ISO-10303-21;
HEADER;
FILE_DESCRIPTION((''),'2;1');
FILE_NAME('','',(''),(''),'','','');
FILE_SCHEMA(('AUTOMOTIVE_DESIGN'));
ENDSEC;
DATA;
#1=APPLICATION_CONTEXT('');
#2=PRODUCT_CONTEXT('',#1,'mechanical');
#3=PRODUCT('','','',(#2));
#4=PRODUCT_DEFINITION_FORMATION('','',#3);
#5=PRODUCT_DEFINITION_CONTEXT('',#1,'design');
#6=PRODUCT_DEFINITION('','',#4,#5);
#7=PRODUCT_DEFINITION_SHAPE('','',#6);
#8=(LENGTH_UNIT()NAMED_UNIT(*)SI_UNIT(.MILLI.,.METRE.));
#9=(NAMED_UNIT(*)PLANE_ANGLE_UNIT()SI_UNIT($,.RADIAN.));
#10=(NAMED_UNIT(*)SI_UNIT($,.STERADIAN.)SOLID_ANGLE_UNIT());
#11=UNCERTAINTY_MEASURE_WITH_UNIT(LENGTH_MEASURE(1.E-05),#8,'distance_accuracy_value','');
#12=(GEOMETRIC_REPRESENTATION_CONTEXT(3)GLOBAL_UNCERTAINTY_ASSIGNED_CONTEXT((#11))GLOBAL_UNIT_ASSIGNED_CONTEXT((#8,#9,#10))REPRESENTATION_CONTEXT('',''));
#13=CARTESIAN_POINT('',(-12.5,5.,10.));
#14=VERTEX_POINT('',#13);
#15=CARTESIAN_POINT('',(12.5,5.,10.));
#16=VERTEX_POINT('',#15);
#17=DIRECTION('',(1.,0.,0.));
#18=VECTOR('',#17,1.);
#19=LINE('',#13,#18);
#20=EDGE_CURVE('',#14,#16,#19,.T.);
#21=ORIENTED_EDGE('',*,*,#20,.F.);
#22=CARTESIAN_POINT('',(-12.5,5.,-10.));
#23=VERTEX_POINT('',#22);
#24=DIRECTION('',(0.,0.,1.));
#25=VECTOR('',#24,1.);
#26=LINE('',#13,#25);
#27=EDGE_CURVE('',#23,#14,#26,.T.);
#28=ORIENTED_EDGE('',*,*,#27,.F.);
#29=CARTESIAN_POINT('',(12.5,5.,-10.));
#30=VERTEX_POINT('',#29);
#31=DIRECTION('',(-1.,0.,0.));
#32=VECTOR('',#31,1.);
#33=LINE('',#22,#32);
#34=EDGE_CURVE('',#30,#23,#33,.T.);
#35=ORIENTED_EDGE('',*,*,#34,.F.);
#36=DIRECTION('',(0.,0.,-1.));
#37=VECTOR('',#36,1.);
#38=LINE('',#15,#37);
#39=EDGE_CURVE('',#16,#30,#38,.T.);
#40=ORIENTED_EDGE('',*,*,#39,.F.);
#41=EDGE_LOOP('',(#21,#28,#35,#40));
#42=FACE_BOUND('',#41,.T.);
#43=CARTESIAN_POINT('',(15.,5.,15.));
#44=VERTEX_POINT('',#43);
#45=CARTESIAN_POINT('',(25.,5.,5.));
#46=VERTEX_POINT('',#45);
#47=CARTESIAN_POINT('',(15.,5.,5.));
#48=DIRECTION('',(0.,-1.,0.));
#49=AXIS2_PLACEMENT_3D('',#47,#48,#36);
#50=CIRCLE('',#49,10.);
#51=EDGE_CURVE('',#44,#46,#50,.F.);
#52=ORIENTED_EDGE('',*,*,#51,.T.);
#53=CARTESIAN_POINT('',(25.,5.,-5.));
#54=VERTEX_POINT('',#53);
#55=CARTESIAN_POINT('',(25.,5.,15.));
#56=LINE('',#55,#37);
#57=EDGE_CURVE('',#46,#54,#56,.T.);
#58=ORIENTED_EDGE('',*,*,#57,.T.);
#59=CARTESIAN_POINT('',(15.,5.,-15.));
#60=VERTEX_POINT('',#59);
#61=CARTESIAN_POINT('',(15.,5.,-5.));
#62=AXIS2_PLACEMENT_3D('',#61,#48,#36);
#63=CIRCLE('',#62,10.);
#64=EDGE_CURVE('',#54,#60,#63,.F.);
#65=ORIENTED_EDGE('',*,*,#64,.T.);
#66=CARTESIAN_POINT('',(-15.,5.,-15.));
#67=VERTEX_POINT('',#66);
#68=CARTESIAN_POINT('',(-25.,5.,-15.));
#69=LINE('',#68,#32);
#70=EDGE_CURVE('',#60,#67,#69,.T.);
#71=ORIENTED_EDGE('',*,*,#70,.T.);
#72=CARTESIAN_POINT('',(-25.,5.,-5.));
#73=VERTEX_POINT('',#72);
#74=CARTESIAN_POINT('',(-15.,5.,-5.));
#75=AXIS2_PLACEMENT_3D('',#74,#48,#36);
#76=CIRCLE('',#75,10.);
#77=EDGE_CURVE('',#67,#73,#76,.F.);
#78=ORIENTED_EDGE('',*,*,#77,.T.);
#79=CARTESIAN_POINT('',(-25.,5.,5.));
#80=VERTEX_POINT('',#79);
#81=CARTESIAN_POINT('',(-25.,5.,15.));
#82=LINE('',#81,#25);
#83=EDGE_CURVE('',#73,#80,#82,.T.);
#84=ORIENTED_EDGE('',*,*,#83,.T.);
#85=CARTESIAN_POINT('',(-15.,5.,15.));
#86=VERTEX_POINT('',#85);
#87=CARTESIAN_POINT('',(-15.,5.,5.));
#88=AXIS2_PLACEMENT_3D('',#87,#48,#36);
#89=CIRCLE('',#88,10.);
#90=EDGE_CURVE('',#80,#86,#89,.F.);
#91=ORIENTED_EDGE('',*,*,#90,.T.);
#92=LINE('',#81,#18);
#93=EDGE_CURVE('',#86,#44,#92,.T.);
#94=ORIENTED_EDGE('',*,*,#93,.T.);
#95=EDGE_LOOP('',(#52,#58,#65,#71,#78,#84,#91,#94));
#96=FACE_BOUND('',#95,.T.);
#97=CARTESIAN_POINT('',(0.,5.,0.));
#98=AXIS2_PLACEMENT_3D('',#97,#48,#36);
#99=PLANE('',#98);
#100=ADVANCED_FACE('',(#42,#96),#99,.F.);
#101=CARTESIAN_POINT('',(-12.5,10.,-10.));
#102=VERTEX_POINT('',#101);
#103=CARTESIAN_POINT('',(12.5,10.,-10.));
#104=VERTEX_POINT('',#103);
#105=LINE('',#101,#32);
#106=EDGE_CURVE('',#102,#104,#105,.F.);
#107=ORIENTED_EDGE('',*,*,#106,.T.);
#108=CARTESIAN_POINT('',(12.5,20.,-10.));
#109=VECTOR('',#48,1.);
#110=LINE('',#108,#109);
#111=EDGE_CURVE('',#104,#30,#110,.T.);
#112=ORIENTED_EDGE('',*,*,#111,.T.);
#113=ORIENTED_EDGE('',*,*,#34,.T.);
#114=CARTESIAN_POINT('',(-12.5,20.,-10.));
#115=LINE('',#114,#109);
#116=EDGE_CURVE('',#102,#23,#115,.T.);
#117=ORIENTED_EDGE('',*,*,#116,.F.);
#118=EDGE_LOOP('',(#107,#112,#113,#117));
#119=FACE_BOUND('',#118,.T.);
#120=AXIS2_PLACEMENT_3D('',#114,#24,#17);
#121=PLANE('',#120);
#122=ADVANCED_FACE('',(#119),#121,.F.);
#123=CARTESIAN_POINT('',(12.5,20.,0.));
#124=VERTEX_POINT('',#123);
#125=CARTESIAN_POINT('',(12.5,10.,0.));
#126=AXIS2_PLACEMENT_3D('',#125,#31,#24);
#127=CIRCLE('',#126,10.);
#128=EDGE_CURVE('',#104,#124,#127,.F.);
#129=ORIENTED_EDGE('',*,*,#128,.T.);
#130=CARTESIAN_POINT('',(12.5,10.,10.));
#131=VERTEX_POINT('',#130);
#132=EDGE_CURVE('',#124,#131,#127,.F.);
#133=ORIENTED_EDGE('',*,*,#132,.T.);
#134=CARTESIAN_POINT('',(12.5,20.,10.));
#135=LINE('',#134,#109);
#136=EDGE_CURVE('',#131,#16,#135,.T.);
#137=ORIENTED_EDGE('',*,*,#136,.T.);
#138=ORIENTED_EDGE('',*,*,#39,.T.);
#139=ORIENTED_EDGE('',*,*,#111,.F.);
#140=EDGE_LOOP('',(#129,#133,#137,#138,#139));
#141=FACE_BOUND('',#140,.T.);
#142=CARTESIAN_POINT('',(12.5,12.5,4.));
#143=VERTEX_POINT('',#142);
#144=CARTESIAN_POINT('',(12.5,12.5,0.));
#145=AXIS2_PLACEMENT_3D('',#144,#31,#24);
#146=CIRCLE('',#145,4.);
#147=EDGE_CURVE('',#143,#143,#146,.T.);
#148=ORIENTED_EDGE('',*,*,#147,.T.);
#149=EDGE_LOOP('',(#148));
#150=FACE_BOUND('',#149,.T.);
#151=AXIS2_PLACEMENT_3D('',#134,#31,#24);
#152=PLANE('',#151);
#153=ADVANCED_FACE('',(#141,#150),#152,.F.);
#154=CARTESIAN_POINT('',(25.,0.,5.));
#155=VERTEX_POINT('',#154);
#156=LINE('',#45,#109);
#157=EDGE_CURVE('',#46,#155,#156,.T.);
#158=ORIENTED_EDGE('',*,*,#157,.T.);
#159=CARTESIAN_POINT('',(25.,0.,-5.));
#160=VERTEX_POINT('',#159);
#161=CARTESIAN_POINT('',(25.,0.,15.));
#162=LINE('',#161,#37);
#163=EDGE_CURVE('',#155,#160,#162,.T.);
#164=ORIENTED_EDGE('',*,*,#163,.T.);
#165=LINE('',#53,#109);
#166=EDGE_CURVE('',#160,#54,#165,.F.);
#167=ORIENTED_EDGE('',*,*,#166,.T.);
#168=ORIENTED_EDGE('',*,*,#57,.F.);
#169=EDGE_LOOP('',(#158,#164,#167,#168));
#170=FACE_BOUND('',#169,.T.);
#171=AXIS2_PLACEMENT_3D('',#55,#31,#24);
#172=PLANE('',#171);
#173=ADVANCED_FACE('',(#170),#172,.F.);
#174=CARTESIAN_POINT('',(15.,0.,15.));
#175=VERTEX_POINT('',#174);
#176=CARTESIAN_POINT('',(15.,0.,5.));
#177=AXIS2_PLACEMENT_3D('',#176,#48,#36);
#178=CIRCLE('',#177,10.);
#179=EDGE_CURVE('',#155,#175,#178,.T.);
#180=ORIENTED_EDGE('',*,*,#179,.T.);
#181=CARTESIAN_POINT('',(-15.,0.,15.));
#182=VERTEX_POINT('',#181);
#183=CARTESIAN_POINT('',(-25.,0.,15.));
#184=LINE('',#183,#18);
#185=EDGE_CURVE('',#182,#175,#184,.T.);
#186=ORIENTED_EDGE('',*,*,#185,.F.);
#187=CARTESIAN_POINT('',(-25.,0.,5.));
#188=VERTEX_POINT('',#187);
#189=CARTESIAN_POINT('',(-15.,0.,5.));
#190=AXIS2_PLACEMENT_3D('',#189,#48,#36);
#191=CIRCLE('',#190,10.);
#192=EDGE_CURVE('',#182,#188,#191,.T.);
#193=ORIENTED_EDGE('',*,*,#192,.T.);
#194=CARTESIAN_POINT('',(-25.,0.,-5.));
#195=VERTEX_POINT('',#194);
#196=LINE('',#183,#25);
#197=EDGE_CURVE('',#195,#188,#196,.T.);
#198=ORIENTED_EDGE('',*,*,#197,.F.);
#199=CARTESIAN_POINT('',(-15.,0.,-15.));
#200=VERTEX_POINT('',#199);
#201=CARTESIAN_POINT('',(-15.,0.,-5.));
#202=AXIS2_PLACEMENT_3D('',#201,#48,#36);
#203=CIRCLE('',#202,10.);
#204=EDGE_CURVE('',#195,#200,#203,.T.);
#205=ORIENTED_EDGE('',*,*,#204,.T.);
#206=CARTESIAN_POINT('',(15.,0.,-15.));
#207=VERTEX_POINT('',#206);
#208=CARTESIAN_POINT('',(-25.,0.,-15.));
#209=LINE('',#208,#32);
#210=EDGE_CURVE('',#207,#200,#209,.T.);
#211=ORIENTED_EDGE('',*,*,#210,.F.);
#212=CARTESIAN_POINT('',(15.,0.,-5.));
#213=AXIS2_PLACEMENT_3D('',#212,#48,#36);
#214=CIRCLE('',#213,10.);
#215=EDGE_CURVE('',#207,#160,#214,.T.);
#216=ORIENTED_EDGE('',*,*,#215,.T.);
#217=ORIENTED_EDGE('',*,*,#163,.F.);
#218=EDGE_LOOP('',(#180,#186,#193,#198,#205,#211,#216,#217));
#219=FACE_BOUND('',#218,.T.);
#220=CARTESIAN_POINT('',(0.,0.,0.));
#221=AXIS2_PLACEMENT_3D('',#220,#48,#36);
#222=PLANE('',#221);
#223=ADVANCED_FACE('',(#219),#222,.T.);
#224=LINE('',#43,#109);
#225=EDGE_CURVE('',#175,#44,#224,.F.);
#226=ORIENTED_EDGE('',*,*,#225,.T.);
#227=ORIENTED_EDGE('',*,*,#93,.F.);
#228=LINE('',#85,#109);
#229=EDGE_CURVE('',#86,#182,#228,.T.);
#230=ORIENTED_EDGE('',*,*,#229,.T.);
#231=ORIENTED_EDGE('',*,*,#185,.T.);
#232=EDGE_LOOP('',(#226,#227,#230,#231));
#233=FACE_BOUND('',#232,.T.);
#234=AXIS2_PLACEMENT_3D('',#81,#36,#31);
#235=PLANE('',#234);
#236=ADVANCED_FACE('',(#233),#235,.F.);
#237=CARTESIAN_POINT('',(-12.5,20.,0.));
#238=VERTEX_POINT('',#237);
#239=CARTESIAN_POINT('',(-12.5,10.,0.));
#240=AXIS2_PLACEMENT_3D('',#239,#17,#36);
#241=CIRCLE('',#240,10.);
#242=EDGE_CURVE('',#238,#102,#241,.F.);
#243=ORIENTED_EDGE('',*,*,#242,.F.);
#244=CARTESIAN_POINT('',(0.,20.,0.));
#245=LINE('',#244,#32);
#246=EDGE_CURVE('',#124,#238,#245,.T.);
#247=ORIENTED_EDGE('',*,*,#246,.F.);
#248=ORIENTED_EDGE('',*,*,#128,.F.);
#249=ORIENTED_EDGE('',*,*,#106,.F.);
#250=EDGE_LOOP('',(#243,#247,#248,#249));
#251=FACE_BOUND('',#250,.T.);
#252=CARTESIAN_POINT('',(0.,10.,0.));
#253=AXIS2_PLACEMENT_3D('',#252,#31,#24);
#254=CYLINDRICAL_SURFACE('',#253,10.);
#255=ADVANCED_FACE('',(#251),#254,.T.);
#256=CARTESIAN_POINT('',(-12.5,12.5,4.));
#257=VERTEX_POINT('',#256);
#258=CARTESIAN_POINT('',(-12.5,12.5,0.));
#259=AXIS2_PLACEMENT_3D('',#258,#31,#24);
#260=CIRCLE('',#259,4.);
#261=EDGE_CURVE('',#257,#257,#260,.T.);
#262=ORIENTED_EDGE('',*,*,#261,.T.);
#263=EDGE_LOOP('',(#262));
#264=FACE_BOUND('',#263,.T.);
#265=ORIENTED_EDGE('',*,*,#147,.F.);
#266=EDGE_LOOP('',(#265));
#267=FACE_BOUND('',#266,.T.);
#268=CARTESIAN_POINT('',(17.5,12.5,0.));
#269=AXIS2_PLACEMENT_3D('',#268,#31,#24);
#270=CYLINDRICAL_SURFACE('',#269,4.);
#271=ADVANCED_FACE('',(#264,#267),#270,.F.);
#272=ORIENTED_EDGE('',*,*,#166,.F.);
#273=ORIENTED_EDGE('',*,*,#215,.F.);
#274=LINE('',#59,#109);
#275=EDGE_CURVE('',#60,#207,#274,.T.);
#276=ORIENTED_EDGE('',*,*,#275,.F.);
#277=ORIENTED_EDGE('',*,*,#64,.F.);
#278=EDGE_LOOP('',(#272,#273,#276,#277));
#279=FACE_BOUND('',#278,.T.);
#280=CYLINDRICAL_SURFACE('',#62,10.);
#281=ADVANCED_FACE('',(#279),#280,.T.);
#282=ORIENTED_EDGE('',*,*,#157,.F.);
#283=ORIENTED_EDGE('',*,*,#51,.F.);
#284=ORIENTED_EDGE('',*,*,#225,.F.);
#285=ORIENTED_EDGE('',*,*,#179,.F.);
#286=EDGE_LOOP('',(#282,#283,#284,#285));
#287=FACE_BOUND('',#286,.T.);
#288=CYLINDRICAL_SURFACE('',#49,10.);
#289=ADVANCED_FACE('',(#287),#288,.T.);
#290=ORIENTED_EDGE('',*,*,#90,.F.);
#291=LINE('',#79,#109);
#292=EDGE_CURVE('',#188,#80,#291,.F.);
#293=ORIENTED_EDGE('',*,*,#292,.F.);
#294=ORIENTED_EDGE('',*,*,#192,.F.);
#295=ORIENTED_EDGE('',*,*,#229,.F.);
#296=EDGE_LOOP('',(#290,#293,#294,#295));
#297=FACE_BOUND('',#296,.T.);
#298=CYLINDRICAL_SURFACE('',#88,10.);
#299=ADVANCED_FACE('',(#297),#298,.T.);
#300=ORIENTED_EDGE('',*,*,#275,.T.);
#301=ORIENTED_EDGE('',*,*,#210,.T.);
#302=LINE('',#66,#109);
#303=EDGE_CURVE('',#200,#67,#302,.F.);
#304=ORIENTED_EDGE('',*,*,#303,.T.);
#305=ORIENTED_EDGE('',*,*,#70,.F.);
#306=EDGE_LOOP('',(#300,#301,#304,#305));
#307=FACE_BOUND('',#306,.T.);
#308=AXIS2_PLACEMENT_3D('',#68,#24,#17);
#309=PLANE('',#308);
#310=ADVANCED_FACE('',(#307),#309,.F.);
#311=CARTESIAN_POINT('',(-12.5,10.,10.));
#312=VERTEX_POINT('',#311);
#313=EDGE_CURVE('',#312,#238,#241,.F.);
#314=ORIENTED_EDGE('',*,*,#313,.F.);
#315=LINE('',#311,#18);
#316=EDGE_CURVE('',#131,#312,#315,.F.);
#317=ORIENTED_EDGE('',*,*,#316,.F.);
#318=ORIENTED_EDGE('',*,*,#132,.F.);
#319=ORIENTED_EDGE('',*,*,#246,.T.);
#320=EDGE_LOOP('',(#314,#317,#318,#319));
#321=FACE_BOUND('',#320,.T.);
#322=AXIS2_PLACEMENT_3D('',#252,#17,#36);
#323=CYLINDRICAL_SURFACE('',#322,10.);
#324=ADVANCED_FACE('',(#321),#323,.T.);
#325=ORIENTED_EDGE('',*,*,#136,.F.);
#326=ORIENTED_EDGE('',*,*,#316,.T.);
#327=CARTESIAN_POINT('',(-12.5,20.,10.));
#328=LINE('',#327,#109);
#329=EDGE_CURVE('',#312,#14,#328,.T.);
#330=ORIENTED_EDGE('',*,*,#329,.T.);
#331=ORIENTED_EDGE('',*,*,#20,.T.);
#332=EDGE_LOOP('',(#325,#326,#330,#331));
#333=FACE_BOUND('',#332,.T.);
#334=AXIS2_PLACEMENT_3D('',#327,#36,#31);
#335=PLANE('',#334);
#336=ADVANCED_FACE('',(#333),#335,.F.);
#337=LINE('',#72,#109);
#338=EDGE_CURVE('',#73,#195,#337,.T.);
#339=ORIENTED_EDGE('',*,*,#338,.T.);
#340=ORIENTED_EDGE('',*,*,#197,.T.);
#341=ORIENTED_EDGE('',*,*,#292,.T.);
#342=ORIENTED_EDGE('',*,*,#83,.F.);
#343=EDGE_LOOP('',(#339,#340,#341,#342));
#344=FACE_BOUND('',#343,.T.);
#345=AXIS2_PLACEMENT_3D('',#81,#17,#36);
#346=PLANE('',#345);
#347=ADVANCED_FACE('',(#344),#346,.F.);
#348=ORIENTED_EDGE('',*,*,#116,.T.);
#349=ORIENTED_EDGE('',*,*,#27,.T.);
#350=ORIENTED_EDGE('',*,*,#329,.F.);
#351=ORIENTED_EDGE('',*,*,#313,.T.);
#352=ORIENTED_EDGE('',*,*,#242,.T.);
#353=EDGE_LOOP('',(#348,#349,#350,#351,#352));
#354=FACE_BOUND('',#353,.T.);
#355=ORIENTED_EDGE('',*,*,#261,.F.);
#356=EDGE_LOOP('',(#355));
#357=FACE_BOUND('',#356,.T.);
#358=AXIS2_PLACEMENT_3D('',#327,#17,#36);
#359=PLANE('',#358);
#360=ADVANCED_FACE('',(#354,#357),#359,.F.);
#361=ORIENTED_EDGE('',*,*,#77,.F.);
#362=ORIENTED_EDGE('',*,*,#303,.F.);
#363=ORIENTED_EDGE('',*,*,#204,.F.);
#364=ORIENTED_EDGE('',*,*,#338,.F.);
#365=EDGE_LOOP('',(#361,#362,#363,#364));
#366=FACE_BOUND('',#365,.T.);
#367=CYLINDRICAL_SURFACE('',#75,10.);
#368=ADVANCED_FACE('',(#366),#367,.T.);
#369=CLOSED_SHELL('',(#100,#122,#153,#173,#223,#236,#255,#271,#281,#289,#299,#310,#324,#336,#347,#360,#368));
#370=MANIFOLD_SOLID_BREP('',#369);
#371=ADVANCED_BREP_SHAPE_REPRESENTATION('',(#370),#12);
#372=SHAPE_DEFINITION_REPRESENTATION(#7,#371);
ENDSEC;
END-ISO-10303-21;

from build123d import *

# Parameters (mm, degrees)
SZKIC1_W                    = 50
SZKIC1_H                    = 30
DODANIE_WYCI_GNI_CIE1_DEPTH = 5
ZAOKR_GLENIE1_R             = 10
SZKIC2_W                    = 25
SZKIC2_H                    = 20
DODANIE_WYCI_GNI_CIE2_DEPTH = 15
SZKIC3_R                    = 4
WYTNIJ_WYCI_GNI_CIE1_DEPTH  = 30
ZAOKR_GLENIE2_R             = 10


with BuildPart() as part:
    # Szkic1 → Dodanie-wyciągnięcie1 (new body)
    with BuildSketch(Plane(origin=(0, 0, 0), x_dir=(1, 0, 0), z_dir=(0, 1, 0))):
        Rectangle(SZKIC1_W, SZKIC1_H)
    extrude(amount=DODANIE_WYCI_GNI_CIE1_DEPTH)

    # Zaokrąglenie1
    zaokr_glenie1_edges = [part.edges().sort_by_distance(p)[0] for p in [
        (25, 2.5, 15),
        (-25, 2.5, 15),
        (-25, 2.5, -15),
        (25, 2.5, -15),
    ]]
    fillet(zaokr_glenie1_edges, radius=ZAOKR_GLENIE1_R)

    # Szkic2 → Dodanie-wyciągnięcie2 (add)
    with BuildSketch(Plane(origin=(0, 5, 0), x_dir=(1, 0, 0), z_dir=(0, 1, 0))):
        Rectangle(SZKIC2_W, SZKIC2_H)
    extrude(amount=DODANIE_WYCI_GNI_CIE2_DEPTH)

    # Szkic3 → Wytnij-wyciągnięcie1 (cut)
    with BuildSketch(Plane.ZY.offset(12.5)):
        with Locations((0, 12.5)):
            Circle(SZKIC3_R)
    extrude(amount=-WYTNIJ_WYCI_GNI_CIE1_DEPTH, mode=Mode.SUBTRACT)

    # Zaokrąglenie2
    zaokr_glenie2_edges = [part.edges().sort_by_distance(p)[0] for p in [
        (0, 20, 10),
        (0, 20, -10),
    ]]
    fillet(zaokr_glenie2_edges, radius=ZAOKR_GLENIE2_R - 0.0001)  # a hair under: the kernel refuses the full size


solid = part.part
